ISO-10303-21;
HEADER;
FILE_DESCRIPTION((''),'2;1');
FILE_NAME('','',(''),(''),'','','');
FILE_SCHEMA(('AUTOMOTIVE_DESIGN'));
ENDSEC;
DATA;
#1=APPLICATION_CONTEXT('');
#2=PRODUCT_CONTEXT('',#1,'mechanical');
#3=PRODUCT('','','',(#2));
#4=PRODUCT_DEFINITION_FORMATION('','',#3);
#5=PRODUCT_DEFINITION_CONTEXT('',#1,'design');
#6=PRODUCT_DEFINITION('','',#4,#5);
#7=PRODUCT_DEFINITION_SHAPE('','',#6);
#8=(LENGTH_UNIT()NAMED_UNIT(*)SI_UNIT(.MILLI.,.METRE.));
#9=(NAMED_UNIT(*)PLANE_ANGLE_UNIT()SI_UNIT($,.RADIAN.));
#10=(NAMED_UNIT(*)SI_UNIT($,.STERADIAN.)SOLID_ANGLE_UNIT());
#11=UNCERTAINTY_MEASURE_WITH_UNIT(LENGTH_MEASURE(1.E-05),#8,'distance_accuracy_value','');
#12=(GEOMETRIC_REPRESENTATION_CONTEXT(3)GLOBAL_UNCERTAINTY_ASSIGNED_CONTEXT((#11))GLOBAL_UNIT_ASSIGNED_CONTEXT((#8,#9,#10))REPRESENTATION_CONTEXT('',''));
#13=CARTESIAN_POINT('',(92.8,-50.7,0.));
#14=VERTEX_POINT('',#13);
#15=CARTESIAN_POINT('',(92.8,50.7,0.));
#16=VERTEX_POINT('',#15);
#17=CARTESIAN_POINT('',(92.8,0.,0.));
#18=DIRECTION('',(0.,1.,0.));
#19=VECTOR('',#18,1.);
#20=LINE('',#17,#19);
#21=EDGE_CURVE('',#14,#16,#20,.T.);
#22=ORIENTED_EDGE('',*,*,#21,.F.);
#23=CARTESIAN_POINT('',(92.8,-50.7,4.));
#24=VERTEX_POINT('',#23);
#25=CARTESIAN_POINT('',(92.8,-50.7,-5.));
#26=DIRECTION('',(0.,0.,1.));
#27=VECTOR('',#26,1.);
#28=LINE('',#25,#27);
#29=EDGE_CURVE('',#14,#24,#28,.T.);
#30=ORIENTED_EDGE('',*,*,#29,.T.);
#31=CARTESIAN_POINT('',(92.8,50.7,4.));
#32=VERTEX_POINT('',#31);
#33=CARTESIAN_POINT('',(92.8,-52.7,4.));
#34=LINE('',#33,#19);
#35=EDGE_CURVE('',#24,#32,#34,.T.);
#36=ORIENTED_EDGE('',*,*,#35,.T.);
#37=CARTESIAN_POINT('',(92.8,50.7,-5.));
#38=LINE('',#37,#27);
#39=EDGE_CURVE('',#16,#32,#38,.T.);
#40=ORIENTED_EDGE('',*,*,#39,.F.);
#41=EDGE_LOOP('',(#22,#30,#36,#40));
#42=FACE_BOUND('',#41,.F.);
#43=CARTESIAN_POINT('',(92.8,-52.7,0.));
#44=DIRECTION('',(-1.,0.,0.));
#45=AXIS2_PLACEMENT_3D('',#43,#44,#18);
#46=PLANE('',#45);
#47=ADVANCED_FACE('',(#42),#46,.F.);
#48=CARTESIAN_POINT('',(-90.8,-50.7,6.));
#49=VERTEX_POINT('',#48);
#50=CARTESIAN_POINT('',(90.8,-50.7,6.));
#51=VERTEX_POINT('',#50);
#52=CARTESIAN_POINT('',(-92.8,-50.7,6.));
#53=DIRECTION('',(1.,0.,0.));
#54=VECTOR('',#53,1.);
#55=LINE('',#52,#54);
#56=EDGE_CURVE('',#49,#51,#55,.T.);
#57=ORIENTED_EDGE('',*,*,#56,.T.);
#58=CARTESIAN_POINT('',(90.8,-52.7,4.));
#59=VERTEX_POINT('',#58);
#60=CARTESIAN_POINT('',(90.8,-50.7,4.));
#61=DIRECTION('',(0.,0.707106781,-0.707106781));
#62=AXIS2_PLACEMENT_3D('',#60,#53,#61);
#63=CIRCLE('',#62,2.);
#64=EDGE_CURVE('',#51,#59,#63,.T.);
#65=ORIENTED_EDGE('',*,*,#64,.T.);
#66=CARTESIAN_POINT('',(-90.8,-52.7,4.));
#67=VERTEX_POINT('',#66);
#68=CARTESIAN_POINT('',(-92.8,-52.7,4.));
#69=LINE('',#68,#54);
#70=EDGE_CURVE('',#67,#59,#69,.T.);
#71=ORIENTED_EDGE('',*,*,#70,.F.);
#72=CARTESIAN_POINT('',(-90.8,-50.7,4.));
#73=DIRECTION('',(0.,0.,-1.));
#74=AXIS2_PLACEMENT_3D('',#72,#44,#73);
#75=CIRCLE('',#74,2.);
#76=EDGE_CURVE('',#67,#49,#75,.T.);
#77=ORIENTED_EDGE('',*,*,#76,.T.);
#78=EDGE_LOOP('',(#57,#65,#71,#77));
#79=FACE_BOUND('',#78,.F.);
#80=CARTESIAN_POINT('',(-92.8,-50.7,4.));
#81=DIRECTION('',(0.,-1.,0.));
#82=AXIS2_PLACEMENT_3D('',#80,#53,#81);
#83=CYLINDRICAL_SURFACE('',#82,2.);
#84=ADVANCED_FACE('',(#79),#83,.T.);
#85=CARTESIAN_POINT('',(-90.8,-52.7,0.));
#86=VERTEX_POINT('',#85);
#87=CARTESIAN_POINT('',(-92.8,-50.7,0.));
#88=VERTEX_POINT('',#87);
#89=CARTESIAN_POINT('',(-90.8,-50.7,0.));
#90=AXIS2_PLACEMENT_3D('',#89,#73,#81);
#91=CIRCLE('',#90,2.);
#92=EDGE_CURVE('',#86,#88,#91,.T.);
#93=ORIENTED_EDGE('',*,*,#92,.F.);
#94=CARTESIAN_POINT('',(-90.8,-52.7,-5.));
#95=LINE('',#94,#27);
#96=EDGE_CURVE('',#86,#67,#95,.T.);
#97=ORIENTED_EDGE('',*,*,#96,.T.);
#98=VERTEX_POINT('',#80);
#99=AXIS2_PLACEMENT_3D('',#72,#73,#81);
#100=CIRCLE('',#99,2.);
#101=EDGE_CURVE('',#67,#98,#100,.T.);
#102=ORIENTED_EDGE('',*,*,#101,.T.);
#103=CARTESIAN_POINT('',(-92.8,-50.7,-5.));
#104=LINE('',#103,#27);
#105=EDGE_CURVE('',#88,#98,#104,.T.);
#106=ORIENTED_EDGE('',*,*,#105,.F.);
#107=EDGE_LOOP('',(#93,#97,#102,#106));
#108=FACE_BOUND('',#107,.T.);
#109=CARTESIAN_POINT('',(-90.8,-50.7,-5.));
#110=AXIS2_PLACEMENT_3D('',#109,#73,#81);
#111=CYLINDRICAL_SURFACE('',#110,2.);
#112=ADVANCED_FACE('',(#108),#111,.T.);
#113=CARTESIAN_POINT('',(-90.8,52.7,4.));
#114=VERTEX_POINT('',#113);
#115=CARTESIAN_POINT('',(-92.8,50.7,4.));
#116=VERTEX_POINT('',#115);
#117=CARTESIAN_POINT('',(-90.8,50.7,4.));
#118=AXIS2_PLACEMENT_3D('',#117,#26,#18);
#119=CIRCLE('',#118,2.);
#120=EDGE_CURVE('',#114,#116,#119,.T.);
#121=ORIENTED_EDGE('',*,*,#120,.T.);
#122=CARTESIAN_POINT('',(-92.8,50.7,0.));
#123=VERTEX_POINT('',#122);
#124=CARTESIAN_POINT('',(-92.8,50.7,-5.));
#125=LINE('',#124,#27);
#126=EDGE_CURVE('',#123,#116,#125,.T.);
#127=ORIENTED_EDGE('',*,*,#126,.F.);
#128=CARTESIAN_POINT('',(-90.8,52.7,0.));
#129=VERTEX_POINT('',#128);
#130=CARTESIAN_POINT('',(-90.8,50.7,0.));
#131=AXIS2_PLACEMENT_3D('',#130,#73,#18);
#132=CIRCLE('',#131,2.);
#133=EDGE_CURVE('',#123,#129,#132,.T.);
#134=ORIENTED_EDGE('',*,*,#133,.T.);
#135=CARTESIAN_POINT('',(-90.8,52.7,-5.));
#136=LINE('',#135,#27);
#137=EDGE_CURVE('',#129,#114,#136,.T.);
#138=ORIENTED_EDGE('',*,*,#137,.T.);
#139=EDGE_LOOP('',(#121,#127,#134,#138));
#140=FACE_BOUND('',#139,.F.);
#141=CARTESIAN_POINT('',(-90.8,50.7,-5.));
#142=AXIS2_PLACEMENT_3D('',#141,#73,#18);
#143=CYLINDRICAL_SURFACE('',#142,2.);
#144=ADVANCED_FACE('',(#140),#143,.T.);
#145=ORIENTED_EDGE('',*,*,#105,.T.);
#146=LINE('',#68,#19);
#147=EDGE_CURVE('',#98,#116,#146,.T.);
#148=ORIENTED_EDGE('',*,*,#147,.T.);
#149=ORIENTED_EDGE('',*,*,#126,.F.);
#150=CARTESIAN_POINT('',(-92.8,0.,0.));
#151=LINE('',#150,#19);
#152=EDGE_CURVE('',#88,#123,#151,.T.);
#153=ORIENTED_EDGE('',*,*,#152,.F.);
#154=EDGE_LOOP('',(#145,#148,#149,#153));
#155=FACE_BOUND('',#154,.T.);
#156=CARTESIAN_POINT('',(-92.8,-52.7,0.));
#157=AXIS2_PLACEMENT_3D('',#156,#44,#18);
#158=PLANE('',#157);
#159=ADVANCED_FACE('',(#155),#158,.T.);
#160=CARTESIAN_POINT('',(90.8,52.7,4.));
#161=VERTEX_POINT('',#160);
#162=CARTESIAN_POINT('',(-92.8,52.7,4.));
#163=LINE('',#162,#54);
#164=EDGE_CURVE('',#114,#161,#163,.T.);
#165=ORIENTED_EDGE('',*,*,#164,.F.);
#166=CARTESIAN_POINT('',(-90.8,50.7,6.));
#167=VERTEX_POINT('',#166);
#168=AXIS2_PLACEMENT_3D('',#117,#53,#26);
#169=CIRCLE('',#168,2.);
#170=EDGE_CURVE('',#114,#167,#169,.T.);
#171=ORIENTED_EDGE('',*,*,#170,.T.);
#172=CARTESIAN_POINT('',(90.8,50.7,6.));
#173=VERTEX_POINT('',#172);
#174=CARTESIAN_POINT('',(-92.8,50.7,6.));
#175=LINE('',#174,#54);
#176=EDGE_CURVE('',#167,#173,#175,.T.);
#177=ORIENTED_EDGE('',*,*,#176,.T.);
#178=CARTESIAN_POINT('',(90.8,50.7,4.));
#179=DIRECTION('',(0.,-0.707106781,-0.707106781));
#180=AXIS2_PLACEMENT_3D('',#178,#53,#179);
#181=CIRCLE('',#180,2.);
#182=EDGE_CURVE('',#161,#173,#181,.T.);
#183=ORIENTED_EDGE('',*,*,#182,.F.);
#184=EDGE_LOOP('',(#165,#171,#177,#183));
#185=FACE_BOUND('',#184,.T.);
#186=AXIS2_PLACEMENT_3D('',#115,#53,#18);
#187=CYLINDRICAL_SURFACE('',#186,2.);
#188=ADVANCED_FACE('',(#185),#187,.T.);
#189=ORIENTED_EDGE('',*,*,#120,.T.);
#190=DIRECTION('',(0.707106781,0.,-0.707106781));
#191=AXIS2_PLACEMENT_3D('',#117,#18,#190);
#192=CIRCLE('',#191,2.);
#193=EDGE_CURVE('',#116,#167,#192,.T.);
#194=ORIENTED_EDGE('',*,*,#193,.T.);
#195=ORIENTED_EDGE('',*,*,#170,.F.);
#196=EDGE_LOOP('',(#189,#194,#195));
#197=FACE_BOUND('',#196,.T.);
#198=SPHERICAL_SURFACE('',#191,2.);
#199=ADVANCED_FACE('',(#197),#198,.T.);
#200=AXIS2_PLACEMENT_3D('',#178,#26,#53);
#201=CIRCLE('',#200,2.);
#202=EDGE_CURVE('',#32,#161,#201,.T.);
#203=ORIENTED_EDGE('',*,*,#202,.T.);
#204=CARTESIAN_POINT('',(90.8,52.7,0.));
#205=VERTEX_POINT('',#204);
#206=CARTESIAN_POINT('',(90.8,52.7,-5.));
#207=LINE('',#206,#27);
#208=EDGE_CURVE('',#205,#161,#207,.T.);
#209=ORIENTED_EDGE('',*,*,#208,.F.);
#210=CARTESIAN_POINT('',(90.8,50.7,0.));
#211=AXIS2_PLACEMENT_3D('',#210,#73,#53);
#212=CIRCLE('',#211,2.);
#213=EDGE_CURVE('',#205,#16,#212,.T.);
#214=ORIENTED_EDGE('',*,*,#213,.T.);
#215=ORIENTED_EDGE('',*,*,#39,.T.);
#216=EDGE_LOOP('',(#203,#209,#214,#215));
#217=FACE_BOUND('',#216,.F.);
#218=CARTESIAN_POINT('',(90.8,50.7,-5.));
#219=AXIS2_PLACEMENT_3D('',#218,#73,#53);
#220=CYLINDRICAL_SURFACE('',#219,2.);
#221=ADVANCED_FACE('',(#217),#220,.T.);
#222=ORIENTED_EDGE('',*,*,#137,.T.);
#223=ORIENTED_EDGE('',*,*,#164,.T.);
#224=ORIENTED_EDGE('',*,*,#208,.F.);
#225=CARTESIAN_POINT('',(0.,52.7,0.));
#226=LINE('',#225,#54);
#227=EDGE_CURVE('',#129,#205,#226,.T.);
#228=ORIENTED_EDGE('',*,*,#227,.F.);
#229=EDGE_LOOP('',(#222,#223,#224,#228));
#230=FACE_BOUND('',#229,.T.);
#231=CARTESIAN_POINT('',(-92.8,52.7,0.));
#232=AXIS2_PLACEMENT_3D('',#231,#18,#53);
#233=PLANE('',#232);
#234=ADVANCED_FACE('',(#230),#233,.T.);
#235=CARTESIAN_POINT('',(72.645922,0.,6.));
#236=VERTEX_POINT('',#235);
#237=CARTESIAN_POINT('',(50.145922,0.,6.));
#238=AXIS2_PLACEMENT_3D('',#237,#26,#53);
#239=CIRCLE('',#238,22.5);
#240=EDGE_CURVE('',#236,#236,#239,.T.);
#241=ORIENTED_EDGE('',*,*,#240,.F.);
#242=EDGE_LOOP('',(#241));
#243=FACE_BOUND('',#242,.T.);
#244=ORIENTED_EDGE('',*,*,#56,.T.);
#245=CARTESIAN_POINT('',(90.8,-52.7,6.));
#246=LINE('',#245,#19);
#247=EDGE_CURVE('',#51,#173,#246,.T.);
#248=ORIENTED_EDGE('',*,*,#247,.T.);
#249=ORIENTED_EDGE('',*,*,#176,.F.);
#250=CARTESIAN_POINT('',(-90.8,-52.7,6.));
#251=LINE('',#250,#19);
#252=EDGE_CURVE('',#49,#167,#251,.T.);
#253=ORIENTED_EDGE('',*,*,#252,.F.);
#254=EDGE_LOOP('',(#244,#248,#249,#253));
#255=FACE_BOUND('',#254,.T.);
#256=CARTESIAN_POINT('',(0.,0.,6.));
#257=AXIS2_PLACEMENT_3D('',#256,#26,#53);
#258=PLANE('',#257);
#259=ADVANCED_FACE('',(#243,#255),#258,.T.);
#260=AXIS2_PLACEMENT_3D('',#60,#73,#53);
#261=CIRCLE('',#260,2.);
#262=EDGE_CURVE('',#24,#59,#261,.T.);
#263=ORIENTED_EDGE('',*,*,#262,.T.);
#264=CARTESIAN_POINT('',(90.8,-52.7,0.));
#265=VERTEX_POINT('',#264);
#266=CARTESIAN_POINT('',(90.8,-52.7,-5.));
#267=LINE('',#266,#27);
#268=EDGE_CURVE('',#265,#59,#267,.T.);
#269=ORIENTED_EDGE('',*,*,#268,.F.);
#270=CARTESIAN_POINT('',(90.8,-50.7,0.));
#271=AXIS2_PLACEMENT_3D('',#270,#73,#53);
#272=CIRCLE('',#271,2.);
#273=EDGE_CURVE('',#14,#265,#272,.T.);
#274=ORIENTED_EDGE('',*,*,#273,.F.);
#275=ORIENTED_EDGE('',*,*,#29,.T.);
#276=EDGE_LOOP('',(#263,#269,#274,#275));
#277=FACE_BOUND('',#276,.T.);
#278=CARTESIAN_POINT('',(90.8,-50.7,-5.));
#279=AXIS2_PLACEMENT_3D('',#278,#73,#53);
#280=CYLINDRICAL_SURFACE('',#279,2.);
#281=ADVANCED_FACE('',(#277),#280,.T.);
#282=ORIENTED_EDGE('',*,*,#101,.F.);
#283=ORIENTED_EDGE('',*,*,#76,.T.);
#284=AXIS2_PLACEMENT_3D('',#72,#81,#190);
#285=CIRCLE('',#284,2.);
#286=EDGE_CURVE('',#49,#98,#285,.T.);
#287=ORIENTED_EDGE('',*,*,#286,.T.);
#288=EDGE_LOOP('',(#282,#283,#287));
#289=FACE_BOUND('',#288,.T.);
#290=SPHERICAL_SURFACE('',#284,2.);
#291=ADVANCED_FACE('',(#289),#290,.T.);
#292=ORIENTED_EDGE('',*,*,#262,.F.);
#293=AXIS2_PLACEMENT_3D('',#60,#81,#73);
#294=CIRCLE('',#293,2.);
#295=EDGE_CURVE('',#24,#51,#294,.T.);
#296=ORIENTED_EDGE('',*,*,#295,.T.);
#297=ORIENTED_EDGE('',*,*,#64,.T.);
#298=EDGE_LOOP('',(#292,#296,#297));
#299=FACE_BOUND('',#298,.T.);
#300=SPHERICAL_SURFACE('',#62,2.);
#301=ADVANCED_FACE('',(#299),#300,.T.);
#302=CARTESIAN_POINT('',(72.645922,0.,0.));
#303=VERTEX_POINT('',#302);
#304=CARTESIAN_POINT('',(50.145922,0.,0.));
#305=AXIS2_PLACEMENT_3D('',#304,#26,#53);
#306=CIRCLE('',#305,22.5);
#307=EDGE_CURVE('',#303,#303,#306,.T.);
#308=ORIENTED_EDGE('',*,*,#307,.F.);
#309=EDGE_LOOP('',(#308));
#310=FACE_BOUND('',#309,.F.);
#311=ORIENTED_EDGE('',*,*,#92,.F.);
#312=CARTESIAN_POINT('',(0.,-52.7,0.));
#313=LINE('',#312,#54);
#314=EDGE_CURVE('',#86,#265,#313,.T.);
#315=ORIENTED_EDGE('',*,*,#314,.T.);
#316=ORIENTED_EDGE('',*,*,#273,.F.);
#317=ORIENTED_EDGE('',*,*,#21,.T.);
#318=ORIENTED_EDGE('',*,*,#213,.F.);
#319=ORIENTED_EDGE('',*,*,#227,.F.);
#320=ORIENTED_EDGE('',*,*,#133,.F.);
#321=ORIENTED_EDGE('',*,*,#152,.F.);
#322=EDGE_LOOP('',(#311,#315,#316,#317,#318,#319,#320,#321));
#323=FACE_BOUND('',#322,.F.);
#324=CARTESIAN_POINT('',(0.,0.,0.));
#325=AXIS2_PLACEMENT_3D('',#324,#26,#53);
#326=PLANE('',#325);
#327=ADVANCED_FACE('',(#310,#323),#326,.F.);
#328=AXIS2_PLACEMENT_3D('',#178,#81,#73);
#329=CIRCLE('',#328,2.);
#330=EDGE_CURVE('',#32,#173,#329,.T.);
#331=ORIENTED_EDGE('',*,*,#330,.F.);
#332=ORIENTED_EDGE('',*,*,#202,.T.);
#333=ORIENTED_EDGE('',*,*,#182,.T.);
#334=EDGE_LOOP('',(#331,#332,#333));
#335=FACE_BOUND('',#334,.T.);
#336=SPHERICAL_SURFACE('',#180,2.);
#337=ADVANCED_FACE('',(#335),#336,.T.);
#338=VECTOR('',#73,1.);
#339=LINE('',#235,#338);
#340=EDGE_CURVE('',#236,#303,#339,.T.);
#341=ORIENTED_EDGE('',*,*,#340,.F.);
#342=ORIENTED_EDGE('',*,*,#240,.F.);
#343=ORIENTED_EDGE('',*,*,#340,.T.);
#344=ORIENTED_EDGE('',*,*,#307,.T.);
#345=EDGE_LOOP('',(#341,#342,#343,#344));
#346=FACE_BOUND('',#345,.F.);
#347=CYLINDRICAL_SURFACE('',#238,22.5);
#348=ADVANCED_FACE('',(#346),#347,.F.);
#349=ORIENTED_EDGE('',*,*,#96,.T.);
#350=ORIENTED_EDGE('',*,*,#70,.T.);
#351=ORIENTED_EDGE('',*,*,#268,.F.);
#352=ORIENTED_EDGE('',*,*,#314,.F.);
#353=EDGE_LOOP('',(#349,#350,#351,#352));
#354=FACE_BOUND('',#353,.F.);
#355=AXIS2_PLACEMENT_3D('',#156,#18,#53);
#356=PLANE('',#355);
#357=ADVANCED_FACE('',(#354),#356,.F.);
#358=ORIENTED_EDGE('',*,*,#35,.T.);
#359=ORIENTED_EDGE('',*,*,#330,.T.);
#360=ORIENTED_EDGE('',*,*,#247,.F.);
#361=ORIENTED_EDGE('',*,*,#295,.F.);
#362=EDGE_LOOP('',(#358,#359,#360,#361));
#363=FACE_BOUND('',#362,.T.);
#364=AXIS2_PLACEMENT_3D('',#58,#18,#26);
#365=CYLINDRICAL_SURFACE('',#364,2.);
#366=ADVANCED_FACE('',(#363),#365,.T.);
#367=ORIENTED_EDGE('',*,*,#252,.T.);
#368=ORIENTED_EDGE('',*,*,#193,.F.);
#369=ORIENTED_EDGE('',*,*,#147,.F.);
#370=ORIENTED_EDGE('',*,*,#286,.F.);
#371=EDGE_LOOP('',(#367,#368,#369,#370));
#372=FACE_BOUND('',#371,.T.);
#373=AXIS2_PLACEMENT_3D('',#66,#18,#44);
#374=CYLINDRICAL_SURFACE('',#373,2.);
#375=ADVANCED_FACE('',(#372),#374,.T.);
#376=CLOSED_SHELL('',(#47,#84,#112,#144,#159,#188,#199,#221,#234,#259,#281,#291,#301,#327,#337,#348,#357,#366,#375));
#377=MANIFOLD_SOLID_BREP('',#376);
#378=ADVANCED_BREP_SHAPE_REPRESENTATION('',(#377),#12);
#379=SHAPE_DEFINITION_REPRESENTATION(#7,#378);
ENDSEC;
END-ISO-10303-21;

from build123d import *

# Parameters (mm, degrees)
F0_W         = 185.6
F0_H         = 105.4
F1_DEPTH     = 6
F2_R         = 22.5
F3_DEPTH     = 25
F4_R         = 2
F5_T1_DEPTH  = 9
F5_S5_W      = 2
F5_S5_H      = 2
F5_T6_DEPTH  = 2
F5_S11_W     = 2
F5_S11_H     = 2
F5_T12_DEPTH = 2
F5_S17_W     = 2
F5_S17_H     = 2
F5_T18_DEPTH = 2
F5_S23_W     = 2
F5_S23_H     = 2
F5_T24_DEPTH = 2


# Not quite as in the source:
# - a fillet or chamfer that OpenCascade refuses, or shapes differently, is made with other operations: its cross-section is extruded or revolved along the edge and cut away or added


with BuildPart() as f1:
    # F0 (on Top) → F1 (new body)
    with BuildSketch(Plane.XY):
        Rectangle(F0_W, F0_H)
    extrude(amount=F1_DEPTH)

    # F2 (on face) → F3 (cut)
    with BuildSketch(Plane.XY.offset(6)):
        with Locations((50.1459216796, 0)):
            Circle(F2_R)
    extrude(amount=-F3_DEPTH, mode=Mode.SUBTRACT)

    # F4
    f4_edges = [f1.edges().sort_by_distance(p)[0] for p in [
        (0, -52.7, 6),
        (92.8, 0, 6),
        (0, 52.7, 6),
        (-92.8, 0, 6),
    ]]
    fillet(f4_edges, radius=F4_R)

    # F5: fillet of radius 2 on 4 edges, made by hand

    # F5_s2 → F5_t1 (cut)
    with BuildSketch(Plane.XY.offset(-5)):
        with BuildLine():
            ThreePointArc((92.8, -50.7), (92.2142135624, -52.1142135624), (90.8, -52.7))
            Line((90.8, -52.7), (92.8, -52.7))
            Line((92.8, -52.7), (92.8, -50.7))
        make_face()
        with BuildLine():
            ThreePointArc((92.8, 50.7), (92.2142135624, 52.1142135624), (90.8, 52.7))
            Line((90.8, 52.7), (92.8, 52.7))
            Line((92.8, 52.7), (92.8, 50.7))
        make_face()
        with BuildLine():
            ThreePointArc((-90.8, 52.7), (-92.2142135624, 52.1142135624), (-92.8, 50.7))
            Line((-92.8, 50.7), (-92.8, 52.7))
            Line((-92.8, 52.7), (-90.8, 52.7))
        make_face()
        with BuildLine():
            ThreePointArc((-90.8, -52.7), (-92.2142135624, -52.1142135624), (-92.8, -50.7))
            Line((-92.8, -50.7), (-92.8, -52.7))
            Line((-92.8, -52.7), (-90.8, -52.7))
        make_face()
    extrude(amount=F5_T1_DEPTH, mode=Mode.SUBTRACT)


with BuildPart() as f5_tool4:
    # F5_s5 → F5_t6 (new body)
    with BuildSketch(Plane.XZ.offset(50.7)):
        with Locations((-91.8, 5)):
            Rectangle(F5_S5_W, F5_S5_H)
    extrude(amount=F5_T6_DEPTH)

    # F5_s7 → F5_t8 (revolve, cut)
    with BuildSketch(Plane(origin=(-90.8, -50.7, 4), x_dir=(0.7071067812, 0, -0.7071067812), z_dir=(-0.7071067812, 0, -0.7071067812))):
        with BuildLine():
            ThreePointArc((0, -2), (2, 0), (0, 2))
            Line((0, 2), (0, -2))
        make_face()
    revolve(axis=Axis((-90.8, -50.7, 4), (0, -1, 0)), mode=Mode.SUBTRACT)


with BuildPart() as f1_1:
    add(f1.part)

    # F5_t3: cut F5_tool4
    add(f5_tool4.part, mode=Mode.SUBTRACT)


with BuildPart() as f5_tool10:
    # F5_s11 → F5_t12 (new body)
    with BuildSketch(Plane.XZ.offset(-50.7)):
        with Locations((-91.8, 5)):
            Rectangle(F5_S11_W, F5_S11_H)
    extrude(amount=-F5_T12_DEPTH)

    # F5_s13 → F5_t14 (revolve, cut)
    with BuildSketch(Plane(origin=(-90.8, 50.7, 4), x_dir=(0.7071067812, 0, -0.7071067812), z_dir=(0.7071067812, 0, 0.7071067812))):
        with BuildLine():
            ThreePointArc((0, -2), (2, 0), (0, 2))
            Line((0, 2), (0, -2))
        make_face()
    revolve(axis=Axis((-90.8, 50.7, 4), (0, 1, 0)), mode=Mode.SUBTRACT)


with BuildPart() as f1_2:
    add(f1_1.part)

    # F5_t9: cut F5_tool10
    add(f5_tool10.part, mode=Mode.SUBTRACT)


with BuildPart() as f5_tool16:
    # F5_s17 → F5_t18 (new body)
    with BuildSketch(Plane.YZ.offset(90.8)):
        with Locations((51.7, 5)):
            Rectangle(F5_S17_W, F5_S17_H)
    extrude(amount=F5_T18_DEPTH)

    # F5_s19 → F5_t20 (revolve, cut)
    with BuildSketch(Plane(origin=(90.8, 50.7, 4), x_dir=(0, -0.7071067812, -0.7071067812), z_dir=(0, -0.7071067812, 0.7071067812))):
        with BuildLine():
            ThreePointArc((0, -2), (2, 0), (0, 2))
            Line((0, 2), (0, -2))
        make_face()
    revolve(axis=Axis((90.8, 50.7, 4), (1, 0, 0)), mode=Mode.SUBTRACT)


with BuildPart() as f1_3:
    add(f1_2.part)

    # F5_t15: cut F5_tool16
    add(f5_tool16.part, mode=Mode.SUBTRACT)


with BuildPart() as f5_tool22:
    # F5_s23 → F5_t24 (new body)
    with BuildSketch(Plane.YZ.offset(90.8)):
        with Locations((-51.7, 5)):
            Rectangle(F5_S23_W, F5_S23_H)
    extrude(amount=F5_T24_DEPTH)

    # F5_s25 → F5_t26 (revolve, cut)
    with BuildSketch(Plane(origin=(90.8, -50.7, 4), x_dir=(0, 0.7071067812, -0.7071067812), z_dir=(0, -0.7071067812, -0.7071067812))):
        with BuildLine():
            ThreePointArc((0, -2), (2, 0), (0, 2))
            Line((0, 2), (0, -2))
        make_face()
    revolve(axis=Axis((90.8, -50.7, 4), (1, 0, 0)), mode=Mode.SUBTRACT)


with BuildPart() as f1_4:
    add(f1_3.part)

    # F5_t21: cut F5_tool22
    add(f5_tool22.part, mode=Mode.SUBTRACT)


solid = f1_4.part
